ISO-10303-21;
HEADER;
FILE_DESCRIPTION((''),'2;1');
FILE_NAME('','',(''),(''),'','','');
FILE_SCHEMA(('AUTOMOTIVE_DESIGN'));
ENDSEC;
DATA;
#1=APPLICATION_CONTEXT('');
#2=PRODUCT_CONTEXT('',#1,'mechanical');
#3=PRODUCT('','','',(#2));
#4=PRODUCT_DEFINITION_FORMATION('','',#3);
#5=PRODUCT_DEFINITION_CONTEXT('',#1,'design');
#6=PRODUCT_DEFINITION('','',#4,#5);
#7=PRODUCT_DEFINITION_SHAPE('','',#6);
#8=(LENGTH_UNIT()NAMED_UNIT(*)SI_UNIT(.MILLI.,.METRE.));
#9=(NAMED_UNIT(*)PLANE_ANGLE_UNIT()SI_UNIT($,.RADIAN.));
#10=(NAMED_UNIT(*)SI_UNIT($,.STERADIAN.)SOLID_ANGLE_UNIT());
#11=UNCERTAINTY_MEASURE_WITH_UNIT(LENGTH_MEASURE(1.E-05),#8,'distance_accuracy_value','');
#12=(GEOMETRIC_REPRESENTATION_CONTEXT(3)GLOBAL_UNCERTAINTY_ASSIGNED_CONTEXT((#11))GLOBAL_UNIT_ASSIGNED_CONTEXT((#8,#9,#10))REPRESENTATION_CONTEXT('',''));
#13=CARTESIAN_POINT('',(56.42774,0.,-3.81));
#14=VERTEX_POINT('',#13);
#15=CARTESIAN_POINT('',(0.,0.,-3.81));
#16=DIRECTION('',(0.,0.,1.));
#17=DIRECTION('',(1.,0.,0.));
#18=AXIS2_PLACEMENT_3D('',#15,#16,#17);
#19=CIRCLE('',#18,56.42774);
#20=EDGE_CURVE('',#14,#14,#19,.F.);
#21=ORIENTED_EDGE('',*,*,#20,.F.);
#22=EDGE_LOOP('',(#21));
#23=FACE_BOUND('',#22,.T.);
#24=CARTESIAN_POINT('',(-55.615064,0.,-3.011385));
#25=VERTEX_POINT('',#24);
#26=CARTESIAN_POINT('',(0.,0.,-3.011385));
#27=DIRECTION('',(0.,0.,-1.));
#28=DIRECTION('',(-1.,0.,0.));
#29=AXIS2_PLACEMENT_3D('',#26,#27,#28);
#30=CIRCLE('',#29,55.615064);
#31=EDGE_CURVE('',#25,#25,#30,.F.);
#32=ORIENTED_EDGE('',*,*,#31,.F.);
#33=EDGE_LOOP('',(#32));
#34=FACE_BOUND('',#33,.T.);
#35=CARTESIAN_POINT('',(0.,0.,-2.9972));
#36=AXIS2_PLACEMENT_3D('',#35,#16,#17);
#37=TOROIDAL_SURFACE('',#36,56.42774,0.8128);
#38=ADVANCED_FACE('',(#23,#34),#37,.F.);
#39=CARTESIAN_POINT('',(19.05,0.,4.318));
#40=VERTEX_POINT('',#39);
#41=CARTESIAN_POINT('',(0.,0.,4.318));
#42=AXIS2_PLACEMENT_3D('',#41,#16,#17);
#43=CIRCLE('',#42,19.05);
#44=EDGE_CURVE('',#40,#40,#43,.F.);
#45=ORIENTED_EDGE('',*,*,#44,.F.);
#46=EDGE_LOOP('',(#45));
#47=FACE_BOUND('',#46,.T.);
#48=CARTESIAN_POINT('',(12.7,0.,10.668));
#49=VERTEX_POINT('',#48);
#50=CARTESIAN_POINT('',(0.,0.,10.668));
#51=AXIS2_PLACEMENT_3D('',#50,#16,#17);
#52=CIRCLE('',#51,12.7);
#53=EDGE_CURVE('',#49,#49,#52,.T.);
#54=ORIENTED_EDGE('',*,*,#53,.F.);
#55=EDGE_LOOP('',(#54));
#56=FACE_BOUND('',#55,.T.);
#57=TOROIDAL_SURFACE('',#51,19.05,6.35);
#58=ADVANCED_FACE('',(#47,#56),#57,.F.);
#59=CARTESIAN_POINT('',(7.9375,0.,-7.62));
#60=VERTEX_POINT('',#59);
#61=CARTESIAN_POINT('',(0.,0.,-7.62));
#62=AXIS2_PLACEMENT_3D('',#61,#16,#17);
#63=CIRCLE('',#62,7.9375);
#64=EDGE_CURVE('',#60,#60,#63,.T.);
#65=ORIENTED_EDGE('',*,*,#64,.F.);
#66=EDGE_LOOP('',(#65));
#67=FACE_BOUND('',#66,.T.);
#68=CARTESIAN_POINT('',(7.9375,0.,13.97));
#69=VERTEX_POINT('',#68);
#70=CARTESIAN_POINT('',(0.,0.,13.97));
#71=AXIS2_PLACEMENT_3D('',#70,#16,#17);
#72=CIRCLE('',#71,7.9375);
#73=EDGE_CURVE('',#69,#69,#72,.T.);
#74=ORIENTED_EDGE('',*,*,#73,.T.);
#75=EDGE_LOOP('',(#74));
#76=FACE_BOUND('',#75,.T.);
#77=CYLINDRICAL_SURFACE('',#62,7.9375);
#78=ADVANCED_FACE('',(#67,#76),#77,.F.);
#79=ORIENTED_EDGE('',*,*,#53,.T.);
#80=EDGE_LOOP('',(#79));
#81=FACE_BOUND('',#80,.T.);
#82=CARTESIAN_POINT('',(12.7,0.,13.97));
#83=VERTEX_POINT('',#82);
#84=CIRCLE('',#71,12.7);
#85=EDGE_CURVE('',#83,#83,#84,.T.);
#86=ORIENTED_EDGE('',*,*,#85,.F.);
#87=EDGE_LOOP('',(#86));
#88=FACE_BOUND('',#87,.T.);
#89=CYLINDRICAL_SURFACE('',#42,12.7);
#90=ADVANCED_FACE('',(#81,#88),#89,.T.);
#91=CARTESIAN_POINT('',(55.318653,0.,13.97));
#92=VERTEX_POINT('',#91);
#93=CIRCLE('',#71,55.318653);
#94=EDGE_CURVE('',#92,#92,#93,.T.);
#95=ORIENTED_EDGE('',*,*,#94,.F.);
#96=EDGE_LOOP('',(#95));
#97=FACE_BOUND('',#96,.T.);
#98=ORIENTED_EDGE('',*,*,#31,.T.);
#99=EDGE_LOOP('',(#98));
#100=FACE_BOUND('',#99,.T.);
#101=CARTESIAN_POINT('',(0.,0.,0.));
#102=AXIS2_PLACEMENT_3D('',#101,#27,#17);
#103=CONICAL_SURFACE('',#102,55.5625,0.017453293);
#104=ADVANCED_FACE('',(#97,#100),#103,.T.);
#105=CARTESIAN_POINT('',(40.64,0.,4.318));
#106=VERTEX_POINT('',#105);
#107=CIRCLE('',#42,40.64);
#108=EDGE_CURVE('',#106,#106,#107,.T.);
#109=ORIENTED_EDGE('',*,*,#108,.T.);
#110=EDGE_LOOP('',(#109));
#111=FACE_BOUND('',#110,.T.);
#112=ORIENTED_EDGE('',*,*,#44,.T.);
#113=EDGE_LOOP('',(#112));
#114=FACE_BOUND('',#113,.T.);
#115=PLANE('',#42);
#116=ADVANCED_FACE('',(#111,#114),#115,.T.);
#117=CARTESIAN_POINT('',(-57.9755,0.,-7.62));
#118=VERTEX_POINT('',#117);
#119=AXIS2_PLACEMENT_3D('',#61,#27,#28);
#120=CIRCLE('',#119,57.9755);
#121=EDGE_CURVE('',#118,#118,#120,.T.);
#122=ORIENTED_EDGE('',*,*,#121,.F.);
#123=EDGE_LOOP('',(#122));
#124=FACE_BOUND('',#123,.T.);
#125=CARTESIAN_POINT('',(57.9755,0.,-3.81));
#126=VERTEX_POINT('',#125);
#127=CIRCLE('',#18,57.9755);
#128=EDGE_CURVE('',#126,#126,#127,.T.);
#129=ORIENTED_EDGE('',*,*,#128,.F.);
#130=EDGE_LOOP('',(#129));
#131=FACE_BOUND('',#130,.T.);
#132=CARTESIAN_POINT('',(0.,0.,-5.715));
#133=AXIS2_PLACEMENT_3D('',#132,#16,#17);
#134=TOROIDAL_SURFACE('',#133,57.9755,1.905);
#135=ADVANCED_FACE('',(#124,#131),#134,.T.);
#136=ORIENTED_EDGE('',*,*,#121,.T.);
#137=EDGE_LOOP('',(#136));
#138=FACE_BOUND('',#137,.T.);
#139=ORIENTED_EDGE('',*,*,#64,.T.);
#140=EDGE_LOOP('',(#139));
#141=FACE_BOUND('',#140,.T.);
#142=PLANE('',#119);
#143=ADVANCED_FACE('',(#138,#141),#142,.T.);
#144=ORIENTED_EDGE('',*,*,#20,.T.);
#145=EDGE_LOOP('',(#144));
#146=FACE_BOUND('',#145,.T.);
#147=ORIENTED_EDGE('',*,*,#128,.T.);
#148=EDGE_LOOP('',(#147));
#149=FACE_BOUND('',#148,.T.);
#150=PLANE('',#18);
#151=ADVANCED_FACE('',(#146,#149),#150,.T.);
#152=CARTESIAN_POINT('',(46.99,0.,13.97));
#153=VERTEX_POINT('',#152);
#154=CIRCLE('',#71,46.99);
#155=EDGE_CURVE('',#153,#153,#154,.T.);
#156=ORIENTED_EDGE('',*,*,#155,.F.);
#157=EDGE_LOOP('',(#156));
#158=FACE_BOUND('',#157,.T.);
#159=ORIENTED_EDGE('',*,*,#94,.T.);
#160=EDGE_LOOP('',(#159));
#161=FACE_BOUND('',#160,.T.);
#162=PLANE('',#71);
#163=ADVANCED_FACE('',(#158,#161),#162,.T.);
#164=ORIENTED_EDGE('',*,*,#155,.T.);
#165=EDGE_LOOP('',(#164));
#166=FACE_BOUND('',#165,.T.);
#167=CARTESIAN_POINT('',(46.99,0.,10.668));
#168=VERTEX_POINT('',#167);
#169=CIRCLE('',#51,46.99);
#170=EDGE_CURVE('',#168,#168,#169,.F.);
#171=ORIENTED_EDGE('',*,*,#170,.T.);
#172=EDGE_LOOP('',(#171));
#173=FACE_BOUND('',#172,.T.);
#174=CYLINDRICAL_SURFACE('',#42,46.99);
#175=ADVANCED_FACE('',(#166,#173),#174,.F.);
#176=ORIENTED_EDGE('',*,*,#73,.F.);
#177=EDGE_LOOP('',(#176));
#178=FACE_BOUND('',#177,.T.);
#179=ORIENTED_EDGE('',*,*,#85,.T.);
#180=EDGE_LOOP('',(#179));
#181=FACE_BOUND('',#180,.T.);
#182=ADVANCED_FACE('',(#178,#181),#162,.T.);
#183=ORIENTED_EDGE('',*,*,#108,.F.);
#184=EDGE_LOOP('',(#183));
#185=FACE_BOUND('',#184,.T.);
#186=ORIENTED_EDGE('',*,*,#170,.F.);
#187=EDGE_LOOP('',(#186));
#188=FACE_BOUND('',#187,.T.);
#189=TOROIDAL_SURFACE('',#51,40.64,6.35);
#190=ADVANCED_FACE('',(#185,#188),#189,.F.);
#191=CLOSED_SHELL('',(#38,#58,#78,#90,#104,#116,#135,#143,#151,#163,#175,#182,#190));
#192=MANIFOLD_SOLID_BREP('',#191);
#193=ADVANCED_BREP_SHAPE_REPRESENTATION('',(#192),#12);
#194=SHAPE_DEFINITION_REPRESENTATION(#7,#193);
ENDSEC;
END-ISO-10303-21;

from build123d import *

# Parameters (mm, degrees)
SKETCH1_R                   = 58.42
BOSS_EXTRUDE1_DEPTH         = 13.97
SKETCH2_R                   = 46.99
SKETCH2_R_2                 = 12.7
CUT_EXTRUDE1_DEPTH          = 9.652
FILLET1_R                   = 6.35
SKETCH3_R                   = 60.96
BOSS_EXTRUDE2_DEPTH         = 7.62
SKETCH4_R                   = 7.9375
CUT_EXTRUDE2_DEPTH          = 89.872781548
SKETCH5_R                   = 60.96
SKETCH5_R_2                 = 58.42
FLANGEWIDTHMACHINED_DEPTH   = 3.81
SKETCH7_R                   = 58.42
SKETCH7_R_2                 = 55.5625
CUT_EXTRUDE5_DEPTH          = 17.78
SKETCH6_R                   = 60.96
SKETCH6_R_2                 = 59.8805
FLANGE_DEPTH_MACHINED_DEPTH = 89.024835132
DRAFT1_ANGLE                = 1
FILLET2_R                   = 0.8128
FILLET3_R                   = 1.905


with BuildPart() as part:
    # Sketch1 → Boss-Extrude1 (new body)
    with BuildSketch(Plane.XY):
        Circle(SKETCH1_R)
    extrude(amount=BOSS_EXTRUDE1_DEPTH)

    # Sketch2 → Cut-Extrude1 (cut)
    with BuildSketch(Plane.XY.offset(13.97)):
        Circle(SKETCH2_R)
        Circle(SKETCH2_R_2, mode=Mode.SUBTRACT)
    extrude(amount=-CUT_EXTRUDE1_DEPTH, mode=Mode.SUBTRACT)

    # Fillet1
    fillet1_edges = [part.edges().sort_by_distance(p)[0] for p in [
        (-46.99, 0, 4.318),
        (-12.7, 0, 4.318),
    ]]
    fillet(fillet1_edges, radius=FILLET1_R)

    # Sketch3 → Boss-Extrude2 (add)
    with BuildSketch(Plane(origin=(0, 0, 0), x_dir=(-1, 0, 0), z_dir=(0, 0, -1))):
        with Locations(Location((0, 0, 0), (0, 0, 180))):
            Circle(SKETCH3_R)
    extrude(amount=BOSS_EXTRUDE2_DEPTH)

    # Sketch4 → Cut-Extrude2 (cut, through all)
    with BuildSketch(Plane.XY.offset(13.97)):
        Circle(SKETCH4_R)
    extrude(amount=-CUT_EXTRUDE2_DEPTH, mode=Mode.SUBTRACT)

    # Sketch5 → FlangeWidthMachined (cut)
    with BuildSketch(Plane.XY):
        Circle(SKETCH5_R)
        Circle(SKETCH5_R_2, mode=Mode.SUBTRACT)
    extrude(amount=-FLANGEWIDTHMACHINED_DEPTH, mode=Mode.SUBTRACT)

    # Sketch7 → Cut-Extrude5 (cut)
    with BuildSketch(Plane.XY.offset(13.97)):
        Circle(SKETCH7_R)
        Circle(SKETCH7_R_2, mode=Mode.SUBTRACT)
    extrude(amount=-CUT_EXTRUDE5_DEPTH, mode=Mode.SUBTRACT)

    # Sketch6 → Flange Depth Machined (cut, through all)
    with BuildSketch(Plane.XY.offset(-3.81)):
        Circle(SKETCH6_R)
        Circle(SKETCH6_R_2, mode=Mode.SUBTRACT)
    extrude(amount=-FLANGE_DEPTH_MACHINED_DEPTH, mode=Mode.SUBTRACT)

    # Draft1
    draft1_faces = [part.faces().sort_by_distance(p)[0] for p in [
        (-55.5625, 0, 5.08),
    ]]
    draft(draft1_faces, Plane.XY, DRAFT1_ANGLE)

    # Fillet2
    fillet2_edges = [part.edges().sort_by_distance(p)[0] for p in [
        (-55.629003797, 0, -3.81),
    ]]
    fillet(fillet2_edges, radius=FILLET2_R)

    # Fillet3
    fillet3_edges = [part.edges().sort_by_distance(p)[0] for p in [
        (-59.8805, 0, -7.62),
        (-59.8805, 0, -3.81),
    ]]
    fillet(fillet3_edges, radius=FILLET3_R - 0.0001)  # a hair under: the kernel refuses the full size


solid = part.part
